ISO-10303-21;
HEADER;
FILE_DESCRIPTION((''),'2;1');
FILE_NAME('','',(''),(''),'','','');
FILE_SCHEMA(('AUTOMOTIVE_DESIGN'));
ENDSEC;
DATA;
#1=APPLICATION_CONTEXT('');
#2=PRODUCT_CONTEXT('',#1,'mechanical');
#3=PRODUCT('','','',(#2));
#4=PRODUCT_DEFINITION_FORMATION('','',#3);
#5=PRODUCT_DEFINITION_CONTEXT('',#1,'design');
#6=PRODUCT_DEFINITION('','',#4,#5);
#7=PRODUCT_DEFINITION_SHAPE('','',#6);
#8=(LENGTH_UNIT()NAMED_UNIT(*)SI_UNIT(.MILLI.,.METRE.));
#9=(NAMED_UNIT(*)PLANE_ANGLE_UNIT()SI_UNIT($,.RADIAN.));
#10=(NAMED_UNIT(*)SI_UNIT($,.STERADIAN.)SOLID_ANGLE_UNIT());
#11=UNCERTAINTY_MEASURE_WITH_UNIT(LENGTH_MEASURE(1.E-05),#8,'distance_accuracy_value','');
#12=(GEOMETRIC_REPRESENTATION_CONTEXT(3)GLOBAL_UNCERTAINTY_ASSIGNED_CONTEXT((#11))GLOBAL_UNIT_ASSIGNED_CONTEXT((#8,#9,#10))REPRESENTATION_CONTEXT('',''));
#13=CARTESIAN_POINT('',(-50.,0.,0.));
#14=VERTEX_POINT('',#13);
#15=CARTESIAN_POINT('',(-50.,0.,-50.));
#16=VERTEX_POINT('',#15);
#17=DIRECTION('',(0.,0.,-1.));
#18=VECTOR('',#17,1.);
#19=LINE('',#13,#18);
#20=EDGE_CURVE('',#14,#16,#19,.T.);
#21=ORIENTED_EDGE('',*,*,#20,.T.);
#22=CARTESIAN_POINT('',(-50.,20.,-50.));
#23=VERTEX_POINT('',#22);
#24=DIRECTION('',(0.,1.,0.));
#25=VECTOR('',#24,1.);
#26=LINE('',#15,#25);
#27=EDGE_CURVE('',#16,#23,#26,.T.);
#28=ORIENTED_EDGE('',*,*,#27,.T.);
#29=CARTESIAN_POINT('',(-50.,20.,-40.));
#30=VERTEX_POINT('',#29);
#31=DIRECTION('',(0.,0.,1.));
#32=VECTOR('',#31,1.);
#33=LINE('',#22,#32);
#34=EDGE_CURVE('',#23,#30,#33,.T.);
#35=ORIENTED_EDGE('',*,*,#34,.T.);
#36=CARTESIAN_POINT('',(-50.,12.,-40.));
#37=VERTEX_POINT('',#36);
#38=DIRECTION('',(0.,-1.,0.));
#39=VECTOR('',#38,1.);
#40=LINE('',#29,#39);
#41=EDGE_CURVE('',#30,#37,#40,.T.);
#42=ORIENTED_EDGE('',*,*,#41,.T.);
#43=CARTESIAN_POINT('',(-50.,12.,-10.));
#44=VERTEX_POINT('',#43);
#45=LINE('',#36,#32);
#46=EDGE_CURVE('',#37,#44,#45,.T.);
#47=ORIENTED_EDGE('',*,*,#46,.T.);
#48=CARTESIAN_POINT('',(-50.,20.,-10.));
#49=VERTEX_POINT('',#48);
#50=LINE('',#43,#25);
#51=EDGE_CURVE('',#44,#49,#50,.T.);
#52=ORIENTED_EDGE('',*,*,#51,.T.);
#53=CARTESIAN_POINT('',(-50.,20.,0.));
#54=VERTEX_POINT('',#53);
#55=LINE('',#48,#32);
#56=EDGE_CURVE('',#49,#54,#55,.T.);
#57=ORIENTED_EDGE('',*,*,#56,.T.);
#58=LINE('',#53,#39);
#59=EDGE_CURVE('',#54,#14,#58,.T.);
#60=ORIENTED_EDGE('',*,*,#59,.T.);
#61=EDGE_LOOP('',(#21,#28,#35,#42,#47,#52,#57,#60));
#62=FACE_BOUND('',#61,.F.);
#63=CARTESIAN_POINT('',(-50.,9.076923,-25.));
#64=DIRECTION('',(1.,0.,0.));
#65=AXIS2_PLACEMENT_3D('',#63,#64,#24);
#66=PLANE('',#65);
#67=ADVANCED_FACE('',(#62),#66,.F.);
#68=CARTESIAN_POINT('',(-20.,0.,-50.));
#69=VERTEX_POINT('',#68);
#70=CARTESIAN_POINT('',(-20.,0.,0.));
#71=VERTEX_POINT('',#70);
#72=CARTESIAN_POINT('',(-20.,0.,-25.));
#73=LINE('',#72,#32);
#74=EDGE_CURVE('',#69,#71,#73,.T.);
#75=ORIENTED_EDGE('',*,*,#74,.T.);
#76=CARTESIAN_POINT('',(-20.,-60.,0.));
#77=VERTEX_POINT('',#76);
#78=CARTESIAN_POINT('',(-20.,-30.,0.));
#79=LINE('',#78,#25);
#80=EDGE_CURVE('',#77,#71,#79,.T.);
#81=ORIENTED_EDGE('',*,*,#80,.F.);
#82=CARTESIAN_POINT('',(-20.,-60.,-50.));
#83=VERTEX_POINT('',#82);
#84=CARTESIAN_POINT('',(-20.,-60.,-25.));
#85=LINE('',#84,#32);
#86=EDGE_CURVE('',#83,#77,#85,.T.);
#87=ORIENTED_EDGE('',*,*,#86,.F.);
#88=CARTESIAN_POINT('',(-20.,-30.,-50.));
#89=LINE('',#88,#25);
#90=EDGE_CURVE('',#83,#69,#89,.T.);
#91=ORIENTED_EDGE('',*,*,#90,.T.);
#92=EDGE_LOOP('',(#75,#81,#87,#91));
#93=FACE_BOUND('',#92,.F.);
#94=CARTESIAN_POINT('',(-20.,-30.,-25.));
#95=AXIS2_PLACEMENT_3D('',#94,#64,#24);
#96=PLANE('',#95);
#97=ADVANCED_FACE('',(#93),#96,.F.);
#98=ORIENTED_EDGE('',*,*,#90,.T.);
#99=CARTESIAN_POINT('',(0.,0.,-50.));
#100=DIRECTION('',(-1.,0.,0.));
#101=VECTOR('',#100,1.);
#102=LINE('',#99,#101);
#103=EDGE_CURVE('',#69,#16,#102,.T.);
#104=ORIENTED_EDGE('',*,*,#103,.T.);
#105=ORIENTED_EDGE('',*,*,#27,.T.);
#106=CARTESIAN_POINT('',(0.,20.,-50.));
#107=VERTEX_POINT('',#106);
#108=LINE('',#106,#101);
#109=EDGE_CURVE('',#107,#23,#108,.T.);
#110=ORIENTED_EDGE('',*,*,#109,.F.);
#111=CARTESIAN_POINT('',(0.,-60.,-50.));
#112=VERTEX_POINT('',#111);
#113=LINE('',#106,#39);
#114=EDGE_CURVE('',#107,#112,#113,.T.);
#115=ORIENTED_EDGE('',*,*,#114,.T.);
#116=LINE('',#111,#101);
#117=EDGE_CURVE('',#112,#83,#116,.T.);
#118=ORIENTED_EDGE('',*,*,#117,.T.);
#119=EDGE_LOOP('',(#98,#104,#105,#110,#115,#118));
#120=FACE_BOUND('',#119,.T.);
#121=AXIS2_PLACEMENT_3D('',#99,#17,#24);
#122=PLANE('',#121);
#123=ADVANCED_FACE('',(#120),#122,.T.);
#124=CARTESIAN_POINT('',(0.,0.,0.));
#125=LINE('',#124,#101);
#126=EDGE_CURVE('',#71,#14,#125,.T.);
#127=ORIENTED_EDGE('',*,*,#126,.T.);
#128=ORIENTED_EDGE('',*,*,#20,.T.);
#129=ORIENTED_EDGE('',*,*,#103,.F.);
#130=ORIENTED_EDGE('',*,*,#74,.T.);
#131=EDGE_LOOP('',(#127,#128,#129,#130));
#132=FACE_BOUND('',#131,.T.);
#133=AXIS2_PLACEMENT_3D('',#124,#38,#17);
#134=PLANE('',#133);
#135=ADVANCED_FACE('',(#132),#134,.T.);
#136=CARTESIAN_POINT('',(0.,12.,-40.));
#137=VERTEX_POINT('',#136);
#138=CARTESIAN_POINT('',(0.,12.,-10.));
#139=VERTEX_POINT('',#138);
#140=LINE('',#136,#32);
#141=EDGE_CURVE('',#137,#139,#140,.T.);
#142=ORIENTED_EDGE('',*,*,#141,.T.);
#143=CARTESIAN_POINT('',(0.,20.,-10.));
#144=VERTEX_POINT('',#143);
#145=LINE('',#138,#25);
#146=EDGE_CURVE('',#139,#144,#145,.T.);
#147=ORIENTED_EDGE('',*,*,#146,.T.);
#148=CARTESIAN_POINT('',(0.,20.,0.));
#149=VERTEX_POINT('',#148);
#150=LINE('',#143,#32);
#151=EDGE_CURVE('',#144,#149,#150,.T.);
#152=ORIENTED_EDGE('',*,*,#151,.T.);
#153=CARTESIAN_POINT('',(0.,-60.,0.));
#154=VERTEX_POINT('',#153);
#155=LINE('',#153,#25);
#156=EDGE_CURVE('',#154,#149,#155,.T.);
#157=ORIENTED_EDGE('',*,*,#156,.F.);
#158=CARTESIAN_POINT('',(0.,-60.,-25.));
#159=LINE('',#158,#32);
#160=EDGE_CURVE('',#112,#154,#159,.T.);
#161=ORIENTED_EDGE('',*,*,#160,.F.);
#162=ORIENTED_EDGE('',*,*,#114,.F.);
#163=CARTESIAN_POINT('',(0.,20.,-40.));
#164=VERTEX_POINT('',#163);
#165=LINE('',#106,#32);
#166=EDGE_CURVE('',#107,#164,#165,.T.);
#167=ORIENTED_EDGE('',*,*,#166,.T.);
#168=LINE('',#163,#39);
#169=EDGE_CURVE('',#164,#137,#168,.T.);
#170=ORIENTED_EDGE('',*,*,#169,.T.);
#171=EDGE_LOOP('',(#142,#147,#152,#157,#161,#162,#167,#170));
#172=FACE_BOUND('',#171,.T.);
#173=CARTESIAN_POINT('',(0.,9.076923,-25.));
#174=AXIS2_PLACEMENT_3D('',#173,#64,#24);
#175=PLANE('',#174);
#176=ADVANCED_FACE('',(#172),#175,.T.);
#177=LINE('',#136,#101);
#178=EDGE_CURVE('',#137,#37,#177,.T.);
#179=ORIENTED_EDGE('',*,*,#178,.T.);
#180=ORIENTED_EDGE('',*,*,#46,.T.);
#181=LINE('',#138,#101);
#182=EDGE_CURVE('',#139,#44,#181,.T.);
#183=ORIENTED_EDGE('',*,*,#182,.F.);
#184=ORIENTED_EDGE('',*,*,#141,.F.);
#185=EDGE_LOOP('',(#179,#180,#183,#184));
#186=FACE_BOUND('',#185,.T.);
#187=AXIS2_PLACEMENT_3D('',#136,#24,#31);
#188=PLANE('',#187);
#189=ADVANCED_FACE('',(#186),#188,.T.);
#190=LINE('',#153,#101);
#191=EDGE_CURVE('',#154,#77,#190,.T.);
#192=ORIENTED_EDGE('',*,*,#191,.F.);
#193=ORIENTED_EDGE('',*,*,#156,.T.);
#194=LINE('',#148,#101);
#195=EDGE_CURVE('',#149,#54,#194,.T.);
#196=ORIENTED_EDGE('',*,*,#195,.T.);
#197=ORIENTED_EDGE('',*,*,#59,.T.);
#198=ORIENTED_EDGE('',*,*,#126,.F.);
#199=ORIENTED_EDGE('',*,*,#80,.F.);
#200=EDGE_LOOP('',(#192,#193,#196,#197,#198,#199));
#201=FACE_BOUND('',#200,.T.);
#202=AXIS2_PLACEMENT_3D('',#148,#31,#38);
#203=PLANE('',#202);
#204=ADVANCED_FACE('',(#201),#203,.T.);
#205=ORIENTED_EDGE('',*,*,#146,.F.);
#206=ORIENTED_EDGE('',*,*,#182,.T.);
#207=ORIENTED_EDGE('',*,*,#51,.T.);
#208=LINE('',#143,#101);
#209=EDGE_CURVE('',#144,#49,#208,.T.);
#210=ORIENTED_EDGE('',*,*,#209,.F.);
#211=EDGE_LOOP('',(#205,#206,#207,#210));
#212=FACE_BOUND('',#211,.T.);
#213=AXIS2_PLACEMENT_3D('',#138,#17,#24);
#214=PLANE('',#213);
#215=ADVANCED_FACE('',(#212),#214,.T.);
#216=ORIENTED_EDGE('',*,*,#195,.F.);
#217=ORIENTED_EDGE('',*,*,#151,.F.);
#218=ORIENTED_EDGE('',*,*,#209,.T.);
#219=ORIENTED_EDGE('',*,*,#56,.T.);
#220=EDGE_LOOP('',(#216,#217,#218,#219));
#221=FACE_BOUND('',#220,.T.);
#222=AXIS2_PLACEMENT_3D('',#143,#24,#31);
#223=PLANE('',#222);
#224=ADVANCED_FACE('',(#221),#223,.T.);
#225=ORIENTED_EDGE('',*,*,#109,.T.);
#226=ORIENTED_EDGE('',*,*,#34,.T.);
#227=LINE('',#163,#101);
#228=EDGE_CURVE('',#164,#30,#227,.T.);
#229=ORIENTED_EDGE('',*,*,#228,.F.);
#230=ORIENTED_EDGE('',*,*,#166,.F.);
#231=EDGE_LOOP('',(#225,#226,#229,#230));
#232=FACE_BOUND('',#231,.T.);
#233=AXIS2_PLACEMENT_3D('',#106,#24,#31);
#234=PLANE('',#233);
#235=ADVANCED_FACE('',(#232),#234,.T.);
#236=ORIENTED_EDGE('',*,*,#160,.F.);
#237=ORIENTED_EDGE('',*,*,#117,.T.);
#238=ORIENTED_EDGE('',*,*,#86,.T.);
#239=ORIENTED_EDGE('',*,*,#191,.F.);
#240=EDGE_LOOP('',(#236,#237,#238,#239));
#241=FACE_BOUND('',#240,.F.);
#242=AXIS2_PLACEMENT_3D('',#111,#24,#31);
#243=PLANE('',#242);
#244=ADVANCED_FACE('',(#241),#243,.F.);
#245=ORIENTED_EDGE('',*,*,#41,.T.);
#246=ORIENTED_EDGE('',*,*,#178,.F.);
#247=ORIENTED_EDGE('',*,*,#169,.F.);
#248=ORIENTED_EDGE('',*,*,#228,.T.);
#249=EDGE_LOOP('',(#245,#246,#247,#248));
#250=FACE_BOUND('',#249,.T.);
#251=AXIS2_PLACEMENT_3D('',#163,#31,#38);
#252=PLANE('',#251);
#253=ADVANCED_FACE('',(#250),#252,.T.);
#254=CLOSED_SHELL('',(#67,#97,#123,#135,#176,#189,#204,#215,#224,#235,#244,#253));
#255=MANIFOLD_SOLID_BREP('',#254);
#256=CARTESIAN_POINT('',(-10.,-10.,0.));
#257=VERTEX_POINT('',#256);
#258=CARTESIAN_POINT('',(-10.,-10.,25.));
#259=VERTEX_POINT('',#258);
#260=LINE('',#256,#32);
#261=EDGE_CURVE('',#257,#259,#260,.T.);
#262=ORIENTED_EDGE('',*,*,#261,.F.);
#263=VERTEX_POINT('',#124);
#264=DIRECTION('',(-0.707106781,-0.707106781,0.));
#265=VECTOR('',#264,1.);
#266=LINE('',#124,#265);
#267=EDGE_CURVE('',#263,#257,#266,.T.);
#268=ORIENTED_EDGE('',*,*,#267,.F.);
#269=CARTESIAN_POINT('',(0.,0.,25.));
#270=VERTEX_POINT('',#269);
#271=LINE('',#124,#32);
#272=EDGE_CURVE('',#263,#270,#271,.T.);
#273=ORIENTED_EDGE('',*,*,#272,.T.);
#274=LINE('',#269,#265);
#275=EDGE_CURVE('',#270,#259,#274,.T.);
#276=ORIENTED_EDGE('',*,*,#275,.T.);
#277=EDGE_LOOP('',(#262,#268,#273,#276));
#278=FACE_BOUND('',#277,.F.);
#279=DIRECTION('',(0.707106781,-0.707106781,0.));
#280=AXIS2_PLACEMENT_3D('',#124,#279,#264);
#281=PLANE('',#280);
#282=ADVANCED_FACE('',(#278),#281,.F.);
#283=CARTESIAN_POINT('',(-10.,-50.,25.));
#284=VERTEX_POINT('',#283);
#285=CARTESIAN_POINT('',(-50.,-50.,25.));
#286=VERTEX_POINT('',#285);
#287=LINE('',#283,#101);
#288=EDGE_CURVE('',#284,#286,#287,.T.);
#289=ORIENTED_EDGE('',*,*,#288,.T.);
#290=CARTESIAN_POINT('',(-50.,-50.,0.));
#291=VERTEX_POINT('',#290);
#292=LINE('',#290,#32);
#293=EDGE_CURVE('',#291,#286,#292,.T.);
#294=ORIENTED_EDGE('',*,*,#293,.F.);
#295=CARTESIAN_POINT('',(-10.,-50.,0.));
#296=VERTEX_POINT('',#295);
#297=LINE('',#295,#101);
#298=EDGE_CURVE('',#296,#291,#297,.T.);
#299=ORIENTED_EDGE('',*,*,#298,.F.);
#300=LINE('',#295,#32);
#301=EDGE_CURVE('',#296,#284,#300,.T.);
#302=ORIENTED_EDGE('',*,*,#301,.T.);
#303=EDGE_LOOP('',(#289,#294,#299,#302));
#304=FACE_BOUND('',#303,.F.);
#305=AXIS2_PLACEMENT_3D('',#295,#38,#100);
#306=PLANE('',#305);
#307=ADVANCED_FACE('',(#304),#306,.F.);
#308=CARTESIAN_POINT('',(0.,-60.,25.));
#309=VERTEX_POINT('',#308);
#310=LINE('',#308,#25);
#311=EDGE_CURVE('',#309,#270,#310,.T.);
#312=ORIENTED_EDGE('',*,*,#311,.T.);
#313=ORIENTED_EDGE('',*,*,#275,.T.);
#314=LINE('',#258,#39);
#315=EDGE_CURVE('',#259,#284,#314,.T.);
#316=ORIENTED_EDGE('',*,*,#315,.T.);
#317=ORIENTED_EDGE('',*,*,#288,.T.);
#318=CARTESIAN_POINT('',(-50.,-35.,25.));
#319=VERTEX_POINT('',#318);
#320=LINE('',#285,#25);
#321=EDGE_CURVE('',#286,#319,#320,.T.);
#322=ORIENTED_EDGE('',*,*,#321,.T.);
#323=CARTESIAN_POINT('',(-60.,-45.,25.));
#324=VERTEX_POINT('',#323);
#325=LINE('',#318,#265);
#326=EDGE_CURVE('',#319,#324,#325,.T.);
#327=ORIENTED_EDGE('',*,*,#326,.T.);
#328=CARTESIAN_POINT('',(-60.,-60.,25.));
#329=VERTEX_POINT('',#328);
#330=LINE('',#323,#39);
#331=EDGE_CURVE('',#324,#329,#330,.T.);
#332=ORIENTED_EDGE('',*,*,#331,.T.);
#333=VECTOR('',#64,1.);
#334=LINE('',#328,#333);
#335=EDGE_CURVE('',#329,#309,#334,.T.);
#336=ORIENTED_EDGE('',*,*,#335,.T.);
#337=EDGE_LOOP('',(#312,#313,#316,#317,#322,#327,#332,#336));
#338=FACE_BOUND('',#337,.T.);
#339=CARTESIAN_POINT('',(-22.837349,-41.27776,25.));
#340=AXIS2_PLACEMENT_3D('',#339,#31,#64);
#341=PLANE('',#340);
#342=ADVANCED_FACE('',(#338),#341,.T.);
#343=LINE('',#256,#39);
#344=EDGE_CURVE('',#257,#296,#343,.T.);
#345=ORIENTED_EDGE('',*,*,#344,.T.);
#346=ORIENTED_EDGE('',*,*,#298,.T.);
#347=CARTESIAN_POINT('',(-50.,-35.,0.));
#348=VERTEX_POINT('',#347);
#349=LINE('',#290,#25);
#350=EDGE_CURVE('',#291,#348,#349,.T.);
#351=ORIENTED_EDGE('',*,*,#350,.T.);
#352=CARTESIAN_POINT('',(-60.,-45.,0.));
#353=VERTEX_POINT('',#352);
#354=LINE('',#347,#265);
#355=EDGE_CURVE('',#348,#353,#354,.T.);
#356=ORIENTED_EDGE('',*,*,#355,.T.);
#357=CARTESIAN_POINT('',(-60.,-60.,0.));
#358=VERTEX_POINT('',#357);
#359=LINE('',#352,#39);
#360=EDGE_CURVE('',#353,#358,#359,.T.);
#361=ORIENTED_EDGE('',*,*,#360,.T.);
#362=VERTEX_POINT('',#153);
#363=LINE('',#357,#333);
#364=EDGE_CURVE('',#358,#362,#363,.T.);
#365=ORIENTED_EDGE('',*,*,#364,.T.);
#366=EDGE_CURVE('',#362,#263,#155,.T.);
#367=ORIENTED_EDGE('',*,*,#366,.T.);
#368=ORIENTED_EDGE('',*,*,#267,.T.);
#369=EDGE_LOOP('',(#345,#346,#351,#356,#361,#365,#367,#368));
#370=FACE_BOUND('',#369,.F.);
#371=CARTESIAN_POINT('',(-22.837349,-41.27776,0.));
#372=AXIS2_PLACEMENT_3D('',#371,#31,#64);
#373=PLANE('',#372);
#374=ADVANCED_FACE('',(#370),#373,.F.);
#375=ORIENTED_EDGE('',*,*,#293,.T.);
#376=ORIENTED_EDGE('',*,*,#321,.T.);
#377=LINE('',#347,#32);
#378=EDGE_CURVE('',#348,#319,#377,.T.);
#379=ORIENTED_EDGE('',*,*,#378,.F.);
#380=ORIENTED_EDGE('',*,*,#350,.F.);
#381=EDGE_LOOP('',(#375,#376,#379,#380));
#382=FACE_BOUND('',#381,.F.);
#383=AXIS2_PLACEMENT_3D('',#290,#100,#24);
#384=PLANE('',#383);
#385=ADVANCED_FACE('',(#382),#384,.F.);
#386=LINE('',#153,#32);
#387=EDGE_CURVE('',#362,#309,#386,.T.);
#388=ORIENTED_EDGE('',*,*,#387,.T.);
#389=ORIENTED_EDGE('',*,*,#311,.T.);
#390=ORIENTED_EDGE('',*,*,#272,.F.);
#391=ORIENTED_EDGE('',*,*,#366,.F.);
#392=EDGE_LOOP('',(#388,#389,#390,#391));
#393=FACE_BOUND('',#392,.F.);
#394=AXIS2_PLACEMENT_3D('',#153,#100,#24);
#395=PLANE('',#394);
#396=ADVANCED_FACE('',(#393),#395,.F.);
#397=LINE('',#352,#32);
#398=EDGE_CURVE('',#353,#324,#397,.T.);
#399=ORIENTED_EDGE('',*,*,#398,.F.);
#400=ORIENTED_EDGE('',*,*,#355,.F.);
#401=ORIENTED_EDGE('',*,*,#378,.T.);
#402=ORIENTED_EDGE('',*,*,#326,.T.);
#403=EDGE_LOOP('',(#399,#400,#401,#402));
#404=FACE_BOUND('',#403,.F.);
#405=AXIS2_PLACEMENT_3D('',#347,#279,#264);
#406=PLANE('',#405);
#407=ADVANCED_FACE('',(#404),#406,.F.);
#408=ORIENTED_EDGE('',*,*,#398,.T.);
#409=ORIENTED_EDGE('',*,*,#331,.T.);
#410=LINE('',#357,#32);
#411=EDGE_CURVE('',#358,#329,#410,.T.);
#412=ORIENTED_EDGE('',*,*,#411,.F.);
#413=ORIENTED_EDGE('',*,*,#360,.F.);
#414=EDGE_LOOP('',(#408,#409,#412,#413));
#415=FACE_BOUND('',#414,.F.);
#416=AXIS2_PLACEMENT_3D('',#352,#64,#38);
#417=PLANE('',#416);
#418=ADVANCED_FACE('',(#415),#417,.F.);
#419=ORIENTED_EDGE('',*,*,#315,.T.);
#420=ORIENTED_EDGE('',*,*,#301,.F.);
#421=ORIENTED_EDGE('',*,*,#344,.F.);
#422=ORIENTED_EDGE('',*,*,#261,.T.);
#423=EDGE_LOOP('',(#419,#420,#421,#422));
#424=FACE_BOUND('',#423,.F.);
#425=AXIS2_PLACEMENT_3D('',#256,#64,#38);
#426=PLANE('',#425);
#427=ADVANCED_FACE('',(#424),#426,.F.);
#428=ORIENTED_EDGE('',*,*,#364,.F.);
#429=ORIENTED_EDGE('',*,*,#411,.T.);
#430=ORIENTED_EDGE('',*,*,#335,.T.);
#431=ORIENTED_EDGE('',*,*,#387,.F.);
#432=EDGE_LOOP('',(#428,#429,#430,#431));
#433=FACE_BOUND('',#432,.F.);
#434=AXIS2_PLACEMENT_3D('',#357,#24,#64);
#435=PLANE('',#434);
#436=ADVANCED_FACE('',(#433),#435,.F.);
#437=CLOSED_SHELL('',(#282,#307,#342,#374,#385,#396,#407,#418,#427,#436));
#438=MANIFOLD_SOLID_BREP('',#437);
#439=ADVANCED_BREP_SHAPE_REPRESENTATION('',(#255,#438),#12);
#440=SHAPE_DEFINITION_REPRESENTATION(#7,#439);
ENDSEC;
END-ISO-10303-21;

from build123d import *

# Parameters (mm, degrees)
F1_DEPTH = 25
F2_W     = 60
F2_H     = 50
F3_DEPTH = 20
F4_DEPTH = 50


with BuildPart() as f1:
    # F0 (on Top) → F1 (new body)
    with BuildSketch(Plane.XY):
        Polygon((-60, -45), (-60, -60), (0, -60), (0, 0), (-10, -10), (-10, -50), (-50, -50), (-50, -35), align=None)
    extrude(amount=F1_DEPTH)


with BuildPart() as f3:
    # F2 (on Right) → F3 (new body)
    with BuildSketch(Plane.YZ):
        with Locations((-30, -25)):
            Rectangle(F2_W, F2_H)
    extrude(amount=-F3_DEPTH)

    # F2 (on Right) → F4 (join)
    with BuildSketch(Plane.YZ):
        Polygon((0, 0), (0, -50), (20, -50), (20, -40), (12, -40), (12, -10), (20, -10), (20, 0), align=None)
    extrude(amount=-F4_DEPTH)


solid = Compound([f1.part, f3.part])
